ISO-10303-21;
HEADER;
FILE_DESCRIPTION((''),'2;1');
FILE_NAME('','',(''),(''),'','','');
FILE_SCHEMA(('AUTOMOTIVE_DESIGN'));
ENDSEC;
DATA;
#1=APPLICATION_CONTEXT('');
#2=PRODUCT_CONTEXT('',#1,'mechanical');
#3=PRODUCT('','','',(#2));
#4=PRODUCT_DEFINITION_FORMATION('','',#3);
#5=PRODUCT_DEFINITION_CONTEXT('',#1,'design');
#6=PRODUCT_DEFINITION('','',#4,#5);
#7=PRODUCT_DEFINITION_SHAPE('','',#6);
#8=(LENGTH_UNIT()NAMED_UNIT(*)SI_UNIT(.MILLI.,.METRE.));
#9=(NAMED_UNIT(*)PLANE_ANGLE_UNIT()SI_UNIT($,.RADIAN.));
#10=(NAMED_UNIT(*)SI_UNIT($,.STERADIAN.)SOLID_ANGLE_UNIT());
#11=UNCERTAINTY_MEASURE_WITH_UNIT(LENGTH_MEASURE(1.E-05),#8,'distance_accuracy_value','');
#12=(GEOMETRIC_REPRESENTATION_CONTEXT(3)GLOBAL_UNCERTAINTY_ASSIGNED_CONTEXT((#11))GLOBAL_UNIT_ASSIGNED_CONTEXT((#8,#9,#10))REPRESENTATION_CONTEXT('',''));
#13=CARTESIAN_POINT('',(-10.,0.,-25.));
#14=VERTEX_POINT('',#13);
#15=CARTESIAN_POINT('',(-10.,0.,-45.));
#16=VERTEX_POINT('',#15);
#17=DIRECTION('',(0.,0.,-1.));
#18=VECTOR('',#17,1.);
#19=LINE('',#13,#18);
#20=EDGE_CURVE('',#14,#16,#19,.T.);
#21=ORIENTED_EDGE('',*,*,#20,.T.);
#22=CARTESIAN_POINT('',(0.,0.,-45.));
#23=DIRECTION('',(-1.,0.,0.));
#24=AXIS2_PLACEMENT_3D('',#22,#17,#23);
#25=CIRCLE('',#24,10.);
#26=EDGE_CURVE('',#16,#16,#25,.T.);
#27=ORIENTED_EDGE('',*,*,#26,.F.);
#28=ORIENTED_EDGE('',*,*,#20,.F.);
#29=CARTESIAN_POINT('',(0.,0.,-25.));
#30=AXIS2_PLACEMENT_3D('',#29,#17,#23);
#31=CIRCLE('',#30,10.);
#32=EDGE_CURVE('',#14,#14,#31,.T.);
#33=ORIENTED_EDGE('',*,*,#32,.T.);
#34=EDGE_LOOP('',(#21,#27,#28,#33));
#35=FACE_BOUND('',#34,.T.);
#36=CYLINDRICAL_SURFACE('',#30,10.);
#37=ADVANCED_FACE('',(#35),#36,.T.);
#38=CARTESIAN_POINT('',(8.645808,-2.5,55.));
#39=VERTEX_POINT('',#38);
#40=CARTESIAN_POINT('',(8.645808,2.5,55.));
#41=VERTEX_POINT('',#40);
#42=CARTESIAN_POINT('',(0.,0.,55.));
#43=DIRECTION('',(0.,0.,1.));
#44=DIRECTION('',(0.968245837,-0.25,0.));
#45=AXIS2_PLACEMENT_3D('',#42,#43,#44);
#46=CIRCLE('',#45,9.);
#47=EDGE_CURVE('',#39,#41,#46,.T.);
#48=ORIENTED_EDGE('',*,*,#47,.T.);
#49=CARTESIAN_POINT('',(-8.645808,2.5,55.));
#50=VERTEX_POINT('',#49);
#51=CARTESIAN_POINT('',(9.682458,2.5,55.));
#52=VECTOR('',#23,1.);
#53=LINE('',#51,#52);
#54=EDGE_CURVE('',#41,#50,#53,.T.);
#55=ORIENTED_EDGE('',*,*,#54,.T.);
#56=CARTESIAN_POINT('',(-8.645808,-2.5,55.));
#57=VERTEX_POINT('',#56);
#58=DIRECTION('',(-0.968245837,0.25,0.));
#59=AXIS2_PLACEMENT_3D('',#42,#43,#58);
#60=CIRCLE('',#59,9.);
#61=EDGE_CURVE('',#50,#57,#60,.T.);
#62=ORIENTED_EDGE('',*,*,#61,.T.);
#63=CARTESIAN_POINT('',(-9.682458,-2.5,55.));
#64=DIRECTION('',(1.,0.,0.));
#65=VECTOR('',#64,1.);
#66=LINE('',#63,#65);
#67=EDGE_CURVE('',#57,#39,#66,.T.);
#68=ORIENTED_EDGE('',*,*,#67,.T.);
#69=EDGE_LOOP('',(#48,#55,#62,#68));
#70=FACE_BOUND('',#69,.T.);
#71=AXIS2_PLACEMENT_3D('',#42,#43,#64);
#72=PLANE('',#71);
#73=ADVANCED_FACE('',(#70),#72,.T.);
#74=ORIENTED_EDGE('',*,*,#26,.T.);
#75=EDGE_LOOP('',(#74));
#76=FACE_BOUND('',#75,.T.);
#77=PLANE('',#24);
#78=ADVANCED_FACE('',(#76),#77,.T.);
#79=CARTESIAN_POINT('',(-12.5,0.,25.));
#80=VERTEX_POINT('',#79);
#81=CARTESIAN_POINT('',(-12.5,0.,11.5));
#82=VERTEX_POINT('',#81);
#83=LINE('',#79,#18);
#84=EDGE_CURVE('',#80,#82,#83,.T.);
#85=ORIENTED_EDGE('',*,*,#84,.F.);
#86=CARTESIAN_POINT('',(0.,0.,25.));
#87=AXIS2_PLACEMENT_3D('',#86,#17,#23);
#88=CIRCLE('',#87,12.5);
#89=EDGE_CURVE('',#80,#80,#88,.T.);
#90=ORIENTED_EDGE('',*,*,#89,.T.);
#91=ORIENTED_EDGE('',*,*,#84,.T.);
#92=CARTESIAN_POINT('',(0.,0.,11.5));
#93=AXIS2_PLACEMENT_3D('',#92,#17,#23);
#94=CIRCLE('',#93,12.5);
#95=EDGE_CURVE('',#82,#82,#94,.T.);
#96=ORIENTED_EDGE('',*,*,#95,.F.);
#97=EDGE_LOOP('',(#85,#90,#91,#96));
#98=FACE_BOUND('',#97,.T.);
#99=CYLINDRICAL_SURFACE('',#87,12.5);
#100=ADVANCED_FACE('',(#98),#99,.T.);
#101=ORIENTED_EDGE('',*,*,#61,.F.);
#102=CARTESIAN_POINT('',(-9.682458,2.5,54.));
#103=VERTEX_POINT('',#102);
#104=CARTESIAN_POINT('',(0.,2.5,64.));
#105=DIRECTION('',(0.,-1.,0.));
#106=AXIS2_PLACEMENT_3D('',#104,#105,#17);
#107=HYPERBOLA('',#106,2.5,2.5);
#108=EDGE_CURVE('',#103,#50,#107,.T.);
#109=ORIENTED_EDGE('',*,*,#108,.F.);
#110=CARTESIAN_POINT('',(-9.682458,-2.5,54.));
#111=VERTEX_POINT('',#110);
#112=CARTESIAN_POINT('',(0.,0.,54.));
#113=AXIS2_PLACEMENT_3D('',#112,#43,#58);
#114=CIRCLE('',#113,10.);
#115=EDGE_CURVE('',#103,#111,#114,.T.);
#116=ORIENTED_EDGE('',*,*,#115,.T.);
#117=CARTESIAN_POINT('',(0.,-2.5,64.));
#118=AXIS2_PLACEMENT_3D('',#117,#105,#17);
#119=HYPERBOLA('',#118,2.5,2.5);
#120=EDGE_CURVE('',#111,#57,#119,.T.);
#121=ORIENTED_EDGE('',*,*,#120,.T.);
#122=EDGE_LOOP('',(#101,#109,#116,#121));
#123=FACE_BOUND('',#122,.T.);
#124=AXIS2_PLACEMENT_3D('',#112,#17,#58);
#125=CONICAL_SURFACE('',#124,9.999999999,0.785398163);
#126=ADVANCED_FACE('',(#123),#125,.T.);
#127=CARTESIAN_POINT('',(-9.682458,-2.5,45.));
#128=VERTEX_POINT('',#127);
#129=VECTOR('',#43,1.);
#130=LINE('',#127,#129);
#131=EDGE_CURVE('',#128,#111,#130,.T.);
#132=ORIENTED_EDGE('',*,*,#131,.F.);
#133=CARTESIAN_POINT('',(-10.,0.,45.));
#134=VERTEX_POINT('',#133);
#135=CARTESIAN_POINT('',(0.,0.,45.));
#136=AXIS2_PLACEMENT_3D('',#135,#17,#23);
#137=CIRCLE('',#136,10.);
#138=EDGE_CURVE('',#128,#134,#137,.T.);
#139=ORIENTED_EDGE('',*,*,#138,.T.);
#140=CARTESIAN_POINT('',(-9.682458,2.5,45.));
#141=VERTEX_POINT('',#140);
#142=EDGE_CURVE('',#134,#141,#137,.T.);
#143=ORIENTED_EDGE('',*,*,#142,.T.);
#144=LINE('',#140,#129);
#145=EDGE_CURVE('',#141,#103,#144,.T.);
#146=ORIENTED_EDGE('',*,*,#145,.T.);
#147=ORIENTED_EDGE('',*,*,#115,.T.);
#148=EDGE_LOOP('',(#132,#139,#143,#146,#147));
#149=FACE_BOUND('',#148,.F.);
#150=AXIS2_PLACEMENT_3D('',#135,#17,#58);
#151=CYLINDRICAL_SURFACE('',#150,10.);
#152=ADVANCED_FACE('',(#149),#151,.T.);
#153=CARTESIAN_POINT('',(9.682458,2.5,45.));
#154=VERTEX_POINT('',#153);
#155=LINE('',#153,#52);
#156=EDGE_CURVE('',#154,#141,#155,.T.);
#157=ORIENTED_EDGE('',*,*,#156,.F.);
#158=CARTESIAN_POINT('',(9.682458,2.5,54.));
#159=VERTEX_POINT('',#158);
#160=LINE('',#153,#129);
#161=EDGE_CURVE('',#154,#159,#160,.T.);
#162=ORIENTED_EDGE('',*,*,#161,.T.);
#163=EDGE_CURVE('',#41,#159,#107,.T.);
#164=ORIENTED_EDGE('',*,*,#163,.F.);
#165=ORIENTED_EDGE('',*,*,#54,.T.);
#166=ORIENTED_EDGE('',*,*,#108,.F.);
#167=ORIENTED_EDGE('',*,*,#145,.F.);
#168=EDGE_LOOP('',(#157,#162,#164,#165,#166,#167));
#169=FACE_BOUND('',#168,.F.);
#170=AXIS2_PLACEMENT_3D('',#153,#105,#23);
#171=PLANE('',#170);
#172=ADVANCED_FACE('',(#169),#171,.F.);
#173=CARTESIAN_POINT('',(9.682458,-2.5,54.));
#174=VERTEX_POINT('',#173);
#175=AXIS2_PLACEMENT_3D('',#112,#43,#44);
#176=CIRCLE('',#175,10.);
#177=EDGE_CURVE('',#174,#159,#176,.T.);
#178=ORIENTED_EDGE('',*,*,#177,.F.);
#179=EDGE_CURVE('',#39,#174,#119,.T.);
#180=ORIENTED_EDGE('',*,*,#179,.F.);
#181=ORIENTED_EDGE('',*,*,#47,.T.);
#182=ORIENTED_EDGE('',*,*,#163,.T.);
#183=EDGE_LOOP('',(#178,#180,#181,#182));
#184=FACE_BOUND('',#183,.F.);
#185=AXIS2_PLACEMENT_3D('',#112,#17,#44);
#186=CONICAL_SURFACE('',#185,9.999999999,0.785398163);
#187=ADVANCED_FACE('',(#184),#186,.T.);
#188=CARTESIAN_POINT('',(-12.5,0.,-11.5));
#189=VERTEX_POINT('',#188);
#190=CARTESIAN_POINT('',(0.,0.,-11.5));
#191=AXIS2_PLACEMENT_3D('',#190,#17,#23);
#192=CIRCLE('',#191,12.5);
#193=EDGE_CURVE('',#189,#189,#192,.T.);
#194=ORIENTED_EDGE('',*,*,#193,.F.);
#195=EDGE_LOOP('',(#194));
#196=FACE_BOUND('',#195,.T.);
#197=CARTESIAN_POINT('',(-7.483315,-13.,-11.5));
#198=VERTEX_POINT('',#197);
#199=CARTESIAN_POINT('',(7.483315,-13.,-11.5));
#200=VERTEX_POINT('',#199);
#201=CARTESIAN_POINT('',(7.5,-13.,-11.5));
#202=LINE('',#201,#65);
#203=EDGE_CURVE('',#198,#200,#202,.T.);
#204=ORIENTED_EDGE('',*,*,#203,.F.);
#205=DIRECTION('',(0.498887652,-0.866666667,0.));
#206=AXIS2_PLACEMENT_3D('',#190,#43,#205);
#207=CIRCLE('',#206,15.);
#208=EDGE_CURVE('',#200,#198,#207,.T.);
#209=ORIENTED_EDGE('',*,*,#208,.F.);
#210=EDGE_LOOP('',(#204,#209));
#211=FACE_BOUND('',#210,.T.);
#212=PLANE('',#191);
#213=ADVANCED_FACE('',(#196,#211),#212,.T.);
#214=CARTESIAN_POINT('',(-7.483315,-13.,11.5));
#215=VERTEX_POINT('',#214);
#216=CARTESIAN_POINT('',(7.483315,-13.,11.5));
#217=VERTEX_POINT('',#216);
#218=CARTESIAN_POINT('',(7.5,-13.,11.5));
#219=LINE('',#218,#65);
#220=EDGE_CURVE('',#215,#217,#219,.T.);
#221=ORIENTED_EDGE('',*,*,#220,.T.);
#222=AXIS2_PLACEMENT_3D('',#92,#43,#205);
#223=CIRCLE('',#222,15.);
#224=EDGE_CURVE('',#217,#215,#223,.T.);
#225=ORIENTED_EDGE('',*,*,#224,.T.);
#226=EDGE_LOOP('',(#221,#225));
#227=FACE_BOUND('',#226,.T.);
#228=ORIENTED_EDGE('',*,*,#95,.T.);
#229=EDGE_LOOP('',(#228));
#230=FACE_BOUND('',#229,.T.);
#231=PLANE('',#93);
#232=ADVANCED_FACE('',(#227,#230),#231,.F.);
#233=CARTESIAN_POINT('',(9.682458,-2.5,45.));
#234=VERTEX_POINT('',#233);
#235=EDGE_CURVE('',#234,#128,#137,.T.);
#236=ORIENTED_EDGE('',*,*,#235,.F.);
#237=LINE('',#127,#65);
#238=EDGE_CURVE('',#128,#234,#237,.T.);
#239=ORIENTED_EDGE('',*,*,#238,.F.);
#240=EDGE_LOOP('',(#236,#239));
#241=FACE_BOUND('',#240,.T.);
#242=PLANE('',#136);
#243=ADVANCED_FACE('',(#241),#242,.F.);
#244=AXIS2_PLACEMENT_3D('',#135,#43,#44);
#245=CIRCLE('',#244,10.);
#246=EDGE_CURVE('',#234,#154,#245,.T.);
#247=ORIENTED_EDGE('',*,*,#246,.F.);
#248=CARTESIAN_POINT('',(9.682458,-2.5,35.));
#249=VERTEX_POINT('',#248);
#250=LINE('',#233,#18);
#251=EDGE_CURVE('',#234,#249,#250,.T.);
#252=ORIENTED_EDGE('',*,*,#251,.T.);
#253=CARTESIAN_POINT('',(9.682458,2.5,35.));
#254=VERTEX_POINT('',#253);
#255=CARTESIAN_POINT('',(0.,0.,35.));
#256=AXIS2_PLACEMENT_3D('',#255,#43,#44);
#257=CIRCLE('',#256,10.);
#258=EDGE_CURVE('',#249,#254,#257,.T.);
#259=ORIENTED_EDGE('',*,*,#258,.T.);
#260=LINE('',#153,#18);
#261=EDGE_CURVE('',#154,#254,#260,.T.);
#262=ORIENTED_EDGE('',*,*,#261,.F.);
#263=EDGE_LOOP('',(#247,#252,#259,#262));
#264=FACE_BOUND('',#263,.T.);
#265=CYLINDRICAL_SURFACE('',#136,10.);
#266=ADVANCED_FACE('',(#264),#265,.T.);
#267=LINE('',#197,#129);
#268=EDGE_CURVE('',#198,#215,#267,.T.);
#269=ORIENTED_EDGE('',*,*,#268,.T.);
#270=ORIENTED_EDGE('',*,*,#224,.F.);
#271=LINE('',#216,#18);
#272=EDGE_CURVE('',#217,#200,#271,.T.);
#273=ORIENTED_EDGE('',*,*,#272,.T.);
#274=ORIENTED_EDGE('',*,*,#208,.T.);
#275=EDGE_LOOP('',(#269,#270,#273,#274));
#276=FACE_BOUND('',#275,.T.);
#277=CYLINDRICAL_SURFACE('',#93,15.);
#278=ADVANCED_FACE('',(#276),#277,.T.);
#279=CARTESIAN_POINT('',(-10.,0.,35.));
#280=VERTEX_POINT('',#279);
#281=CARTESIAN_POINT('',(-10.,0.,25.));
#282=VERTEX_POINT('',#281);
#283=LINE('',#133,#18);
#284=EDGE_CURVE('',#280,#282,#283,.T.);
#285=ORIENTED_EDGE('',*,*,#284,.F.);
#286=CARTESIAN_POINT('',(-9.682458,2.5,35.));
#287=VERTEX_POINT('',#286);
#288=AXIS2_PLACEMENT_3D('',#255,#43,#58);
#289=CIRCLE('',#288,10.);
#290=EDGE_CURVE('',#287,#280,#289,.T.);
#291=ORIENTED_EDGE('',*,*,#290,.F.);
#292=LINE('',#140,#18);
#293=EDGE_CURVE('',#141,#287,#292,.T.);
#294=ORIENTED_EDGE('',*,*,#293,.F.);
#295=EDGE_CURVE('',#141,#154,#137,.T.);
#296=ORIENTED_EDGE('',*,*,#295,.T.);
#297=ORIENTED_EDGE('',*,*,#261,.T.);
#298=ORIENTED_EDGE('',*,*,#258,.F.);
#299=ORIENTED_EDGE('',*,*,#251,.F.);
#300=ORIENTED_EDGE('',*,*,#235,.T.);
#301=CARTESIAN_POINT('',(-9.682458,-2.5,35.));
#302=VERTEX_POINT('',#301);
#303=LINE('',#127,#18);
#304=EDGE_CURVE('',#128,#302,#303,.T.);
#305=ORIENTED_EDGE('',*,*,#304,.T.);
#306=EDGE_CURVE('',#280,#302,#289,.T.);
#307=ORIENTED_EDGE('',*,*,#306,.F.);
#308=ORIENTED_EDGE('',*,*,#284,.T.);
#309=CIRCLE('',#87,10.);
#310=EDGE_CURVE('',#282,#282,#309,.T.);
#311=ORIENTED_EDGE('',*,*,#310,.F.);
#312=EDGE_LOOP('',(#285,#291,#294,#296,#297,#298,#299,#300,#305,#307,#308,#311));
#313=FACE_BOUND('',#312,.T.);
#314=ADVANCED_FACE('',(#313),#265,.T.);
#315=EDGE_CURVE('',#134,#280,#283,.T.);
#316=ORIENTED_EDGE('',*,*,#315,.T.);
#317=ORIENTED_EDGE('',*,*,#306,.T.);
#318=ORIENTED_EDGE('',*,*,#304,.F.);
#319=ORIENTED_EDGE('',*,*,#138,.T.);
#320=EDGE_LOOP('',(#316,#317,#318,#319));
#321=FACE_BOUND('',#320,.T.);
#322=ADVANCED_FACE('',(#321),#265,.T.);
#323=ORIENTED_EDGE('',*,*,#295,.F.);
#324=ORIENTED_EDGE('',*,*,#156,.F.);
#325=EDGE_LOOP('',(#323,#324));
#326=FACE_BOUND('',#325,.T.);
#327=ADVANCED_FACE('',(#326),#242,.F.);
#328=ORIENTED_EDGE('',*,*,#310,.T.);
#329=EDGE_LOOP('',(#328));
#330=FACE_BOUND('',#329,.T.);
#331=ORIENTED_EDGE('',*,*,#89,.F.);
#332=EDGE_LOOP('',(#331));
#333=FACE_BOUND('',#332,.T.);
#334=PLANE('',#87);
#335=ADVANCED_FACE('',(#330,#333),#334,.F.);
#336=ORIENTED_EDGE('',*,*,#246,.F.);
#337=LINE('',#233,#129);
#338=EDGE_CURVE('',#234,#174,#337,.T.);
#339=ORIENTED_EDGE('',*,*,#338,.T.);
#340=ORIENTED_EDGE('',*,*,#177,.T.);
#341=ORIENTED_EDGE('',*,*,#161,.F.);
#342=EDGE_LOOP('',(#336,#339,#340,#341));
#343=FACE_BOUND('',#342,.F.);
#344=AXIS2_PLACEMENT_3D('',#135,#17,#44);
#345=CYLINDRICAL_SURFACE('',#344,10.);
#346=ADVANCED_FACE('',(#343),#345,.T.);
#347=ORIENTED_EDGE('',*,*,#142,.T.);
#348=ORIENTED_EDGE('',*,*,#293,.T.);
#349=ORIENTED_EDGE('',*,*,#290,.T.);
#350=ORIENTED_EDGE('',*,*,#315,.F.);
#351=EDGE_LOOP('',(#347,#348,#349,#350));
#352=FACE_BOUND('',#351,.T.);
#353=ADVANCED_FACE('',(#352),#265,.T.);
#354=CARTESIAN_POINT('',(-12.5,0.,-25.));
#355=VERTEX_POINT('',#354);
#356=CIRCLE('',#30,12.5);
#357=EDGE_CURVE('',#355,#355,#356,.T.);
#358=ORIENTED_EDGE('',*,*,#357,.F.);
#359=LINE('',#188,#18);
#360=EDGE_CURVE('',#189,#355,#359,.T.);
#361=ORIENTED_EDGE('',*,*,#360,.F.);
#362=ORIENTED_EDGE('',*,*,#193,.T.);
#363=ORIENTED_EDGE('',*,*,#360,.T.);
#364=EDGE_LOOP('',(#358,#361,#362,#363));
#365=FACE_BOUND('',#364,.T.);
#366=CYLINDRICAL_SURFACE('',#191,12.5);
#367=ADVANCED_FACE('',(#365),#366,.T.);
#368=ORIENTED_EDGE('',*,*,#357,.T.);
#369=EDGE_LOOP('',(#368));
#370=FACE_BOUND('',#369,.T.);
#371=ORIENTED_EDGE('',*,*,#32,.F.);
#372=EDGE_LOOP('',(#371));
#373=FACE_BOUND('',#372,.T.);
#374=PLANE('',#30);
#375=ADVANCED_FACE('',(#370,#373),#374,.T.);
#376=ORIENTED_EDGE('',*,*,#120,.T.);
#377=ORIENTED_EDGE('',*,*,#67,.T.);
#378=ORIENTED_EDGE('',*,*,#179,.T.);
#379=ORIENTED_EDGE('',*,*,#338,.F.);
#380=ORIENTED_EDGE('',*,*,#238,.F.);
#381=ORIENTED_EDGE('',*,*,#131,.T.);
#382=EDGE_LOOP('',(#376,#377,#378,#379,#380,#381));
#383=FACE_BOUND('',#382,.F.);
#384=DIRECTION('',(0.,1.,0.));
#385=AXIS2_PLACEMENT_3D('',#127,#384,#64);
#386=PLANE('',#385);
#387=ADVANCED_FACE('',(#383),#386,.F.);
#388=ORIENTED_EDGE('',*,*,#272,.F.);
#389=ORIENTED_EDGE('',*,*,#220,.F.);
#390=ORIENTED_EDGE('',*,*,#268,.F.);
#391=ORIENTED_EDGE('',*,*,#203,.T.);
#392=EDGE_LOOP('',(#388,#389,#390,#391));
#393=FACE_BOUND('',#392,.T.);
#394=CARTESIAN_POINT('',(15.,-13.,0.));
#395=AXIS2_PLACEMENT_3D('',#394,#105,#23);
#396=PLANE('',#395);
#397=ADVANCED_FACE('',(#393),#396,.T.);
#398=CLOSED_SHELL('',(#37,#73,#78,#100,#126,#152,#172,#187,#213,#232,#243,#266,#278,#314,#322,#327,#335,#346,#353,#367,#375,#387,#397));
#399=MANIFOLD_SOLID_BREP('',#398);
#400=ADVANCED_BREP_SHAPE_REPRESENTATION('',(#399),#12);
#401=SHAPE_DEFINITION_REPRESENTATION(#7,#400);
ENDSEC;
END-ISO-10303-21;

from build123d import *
from build123d import SkipClean  # not in build123d's __all__

# Parameters (mm, degrees)
F3_DEPTH      = 25
F3_DEPTH_BACK = 25
F6_DEPTH      = 10
F6_DEPTH_BACK = 10
F7_SIZE       = 1


with BuildPart() as f1:
    # F0 (on Front) → F1 (revolve)
    with BuildSketch(Plane.XZ):
        Polygon((-12.5, 11.5), (-15, 11.5), (-15, 0), (-15, -11.5), (-12.5, -11.5), (-12.5, -25), (-10, -25), (-10, -45), (0, -45), (0, 0), (0, 45), (-10, 45), (-10, 25), (-12.5, 25), align=None)
    revolve(axis=Axis((0, 0, 22.5), (0, 0, -1)))

    # F2 (on Top) → F3 (cut, two sides)
    with BuildSketch(Plane.XY) as f3_sk:
        Polygon((0, -13), (-15, -13), (-15, -17), (0, -17), (15, -17), (15, -13), align=None)
    extrude(amount=F3_DEPTH, mode=Mode.SUBTRACT)
    extrude(f3_sk.sketch, amount=-F3_DEPTH_BACK, mode=Mode.SUBTRACT)

    # F5 (on offset) → F6 (join, two sides)
    with BuildSketch(Plane.XY.offset(45)) as f6_sk:
        with BuildLine():
            Line((9.6824583655, 2.5), (-9.6824583655, 2.5))
            ThreePointArc((-9.6824583655, 2.5), (-10, 0), (-9.6824583655, -2.5))
            Line((-9.6824583655, -2.5), (9.6824583655, -2.5))
            ThreePointArc((9.6824583655, -2.5), (10, 0), (9.6824583655, 2.5))
        make_face()
    with SkipClean():  # cleaning this boolean's faces spoils the solid; the shape is the same uncleaned
        extrude(amount=F6_DEPTH)
        extrude(f6_sk.sketch, amount=-F6_DEPTH_BACK)

    # F7
    f7_edges = [f1.edges().sort_by_distance(p)[0] for p in [
        (10, 0, 55),
        (-10, 0, 55),
    ]]
    chamfer(f7_edges, length=F7_SIZE)


solid = f1.part
